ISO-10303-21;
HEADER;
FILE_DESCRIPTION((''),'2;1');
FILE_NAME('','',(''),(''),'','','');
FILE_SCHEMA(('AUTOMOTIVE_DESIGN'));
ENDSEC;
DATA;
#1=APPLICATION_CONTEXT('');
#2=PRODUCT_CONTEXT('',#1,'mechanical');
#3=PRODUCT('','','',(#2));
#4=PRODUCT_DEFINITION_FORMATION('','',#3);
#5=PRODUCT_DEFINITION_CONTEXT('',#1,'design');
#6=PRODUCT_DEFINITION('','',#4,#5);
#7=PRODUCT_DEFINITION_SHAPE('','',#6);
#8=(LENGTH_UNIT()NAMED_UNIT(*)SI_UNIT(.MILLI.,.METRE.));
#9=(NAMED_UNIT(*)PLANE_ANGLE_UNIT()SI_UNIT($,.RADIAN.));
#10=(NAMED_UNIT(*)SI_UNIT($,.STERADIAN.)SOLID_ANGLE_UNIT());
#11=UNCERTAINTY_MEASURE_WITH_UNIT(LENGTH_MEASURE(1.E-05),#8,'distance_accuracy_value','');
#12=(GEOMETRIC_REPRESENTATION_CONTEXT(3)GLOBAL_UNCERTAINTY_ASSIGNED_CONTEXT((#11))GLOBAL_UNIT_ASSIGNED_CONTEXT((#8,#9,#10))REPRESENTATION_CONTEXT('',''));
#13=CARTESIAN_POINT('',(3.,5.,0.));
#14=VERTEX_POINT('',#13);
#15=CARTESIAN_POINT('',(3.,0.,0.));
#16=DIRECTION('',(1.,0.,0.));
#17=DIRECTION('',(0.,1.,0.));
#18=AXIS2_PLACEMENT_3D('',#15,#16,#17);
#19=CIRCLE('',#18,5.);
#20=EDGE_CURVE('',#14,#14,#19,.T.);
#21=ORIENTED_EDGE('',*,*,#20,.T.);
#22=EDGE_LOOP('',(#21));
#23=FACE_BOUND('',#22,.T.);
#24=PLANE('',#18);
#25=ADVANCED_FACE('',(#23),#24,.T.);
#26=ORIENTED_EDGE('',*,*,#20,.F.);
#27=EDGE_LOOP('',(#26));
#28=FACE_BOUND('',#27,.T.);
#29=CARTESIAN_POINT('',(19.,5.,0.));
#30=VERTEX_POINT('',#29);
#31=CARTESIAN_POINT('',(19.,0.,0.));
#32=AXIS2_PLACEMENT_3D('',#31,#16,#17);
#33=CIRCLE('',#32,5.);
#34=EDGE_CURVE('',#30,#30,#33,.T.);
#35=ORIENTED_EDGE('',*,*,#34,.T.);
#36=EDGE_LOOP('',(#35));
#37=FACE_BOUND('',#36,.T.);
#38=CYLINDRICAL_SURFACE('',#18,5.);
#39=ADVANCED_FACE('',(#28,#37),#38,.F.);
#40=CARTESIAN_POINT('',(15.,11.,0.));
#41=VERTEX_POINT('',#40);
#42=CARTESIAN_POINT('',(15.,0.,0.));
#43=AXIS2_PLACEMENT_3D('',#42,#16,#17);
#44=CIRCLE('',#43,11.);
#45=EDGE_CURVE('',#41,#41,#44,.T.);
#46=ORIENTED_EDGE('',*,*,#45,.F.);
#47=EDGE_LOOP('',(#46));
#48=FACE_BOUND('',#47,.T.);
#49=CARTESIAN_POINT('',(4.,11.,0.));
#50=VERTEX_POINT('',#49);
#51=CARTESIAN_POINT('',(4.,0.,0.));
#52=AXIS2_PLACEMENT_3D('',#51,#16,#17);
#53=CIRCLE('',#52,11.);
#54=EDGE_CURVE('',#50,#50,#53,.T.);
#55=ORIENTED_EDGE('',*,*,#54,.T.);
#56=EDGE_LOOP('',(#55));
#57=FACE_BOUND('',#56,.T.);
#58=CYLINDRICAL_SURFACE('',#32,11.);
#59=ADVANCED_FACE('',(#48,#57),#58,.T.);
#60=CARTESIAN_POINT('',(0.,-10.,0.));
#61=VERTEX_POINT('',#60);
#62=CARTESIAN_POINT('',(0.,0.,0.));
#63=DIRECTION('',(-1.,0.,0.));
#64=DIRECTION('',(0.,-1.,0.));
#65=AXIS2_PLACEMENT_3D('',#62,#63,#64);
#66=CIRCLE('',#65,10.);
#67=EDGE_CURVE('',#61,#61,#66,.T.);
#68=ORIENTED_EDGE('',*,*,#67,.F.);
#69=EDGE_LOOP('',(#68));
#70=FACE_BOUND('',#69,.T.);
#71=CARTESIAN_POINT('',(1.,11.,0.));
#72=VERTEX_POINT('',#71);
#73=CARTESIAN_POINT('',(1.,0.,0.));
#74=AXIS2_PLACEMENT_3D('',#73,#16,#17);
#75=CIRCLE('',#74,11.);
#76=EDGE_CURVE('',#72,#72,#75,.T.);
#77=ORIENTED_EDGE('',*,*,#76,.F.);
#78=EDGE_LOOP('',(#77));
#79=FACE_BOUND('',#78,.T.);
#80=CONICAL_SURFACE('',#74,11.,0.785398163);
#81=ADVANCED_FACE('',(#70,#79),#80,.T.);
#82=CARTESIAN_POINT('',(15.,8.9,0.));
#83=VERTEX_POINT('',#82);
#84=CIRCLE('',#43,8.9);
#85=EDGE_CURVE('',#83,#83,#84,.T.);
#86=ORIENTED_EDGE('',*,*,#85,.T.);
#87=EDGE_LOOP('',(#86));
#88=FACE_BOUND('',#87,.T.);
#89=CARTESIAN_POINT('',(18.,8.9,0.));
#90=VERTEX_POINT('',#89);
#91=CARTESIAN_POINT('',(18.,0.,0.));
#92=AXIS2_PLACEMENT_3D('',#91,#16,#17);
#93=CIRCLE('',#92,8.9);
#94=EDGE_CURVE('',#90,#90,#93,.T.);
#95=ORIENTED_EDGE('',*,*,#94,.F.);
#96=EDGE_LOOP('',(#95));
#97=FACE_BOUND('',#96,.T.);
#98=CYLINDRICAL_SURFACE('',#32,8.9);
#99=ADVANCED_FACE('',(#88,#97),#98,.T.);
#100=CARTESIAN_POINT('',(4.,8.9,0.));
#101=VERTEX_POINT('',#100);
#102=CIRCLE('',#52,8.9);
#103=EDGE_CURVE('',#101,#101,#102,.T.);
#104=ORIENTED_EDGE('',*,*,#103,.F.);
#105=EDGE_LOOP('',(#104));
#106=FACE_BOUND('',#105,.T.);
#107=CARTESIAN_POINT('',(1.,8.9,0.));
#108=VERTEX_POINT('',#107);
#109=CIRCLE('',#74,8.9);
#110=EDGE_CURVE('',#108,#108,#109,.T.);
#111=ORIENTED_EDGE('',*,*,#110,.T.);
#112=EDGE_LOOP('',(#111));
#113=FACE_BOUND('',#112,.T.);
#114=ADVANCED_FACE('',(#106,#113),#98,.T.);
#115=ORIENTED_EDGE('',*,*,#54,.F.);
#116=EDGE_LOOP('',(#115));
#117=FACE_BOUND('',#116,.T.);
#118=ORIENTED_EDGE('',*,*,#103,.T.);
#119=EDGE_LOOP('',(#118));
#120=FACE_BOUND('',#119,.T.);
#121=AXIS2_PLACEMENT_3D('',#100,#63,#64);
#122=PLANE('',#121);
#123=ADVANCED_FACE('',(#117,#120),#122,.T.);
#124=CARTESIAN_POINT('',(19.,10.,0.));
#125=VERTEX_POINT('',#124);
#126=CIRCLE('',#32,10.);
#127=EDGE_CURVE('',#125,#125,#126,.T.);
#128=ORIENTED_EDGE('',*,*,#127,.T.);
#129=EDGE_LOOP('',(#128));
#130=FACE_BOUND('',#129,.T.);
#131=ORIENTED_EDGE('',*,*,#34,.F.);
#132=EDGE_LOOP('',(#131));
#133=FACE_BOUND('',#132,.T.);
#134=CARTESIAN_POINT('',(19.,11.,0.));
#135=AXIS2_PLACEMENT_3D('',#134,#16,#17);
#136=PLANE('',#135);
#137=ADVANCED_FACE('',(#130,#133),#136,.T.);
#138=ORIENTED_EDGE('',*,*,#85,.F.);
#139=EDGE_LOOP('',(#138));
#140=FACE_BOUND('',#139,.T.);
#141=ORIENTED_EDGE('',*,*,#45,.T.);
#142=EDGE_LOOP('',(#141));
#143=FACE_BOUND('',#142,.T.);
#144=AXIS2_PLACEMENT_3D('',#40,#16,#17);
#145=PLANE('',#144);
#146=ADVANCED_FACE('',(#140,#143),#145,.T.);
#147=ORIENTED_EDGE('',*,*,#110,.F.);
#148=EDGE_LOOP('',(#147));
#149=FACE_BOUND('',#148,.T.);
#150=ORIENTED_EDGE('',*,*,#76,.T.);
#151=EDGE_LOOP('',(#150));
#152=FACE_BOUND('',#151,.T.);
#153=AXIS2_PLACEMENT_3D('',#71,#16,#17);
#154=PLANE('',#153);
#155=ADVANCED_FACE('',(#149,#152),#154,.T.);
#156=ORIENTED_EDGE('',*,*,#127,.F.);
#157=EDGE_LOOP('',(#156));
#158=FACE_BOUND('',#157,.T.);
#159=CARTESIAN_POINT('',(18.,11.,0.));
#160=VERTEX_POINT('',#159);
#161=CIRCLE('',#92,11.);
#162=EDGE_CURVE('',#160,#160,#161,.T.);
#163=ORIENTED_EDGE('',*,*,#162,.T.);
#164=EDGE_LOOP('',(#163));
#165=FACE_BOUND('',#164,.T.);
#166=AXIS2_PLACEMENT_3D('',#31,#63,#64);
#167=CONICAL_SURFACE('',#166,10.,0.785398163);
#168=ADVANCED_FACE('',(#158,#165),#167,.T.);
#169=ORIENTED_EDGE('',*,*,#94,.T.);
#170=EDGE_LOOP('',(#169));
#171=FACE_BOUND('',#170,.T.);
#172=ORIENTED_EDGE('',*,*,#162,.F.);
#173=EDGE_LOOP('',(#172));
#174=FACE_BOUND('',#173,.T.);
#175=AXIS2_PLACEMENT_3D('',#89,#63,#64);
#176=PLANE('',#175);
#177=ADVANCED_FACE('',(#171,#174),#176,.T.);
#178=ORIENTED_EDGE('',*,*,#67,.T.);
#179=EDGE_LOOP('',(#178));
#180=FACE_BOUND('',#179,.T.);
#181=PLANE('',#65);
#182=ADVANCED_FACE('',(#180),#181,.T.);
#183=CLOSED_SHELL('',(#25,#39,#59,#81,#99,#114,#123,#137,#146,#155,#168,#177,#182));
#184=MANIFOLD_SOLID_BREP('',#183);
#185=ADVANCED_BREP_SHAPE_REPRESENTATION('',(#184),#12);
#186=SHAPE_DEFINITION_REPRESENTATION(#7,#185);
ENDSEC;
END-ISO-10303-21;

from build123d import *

# Parameters (mm, degrees)
SCHIZZO2_R               = 5
TAGLIO_ESTRUSIONE1_DEPTH = 16
SMUSSO1_SIZE             = 1


with BuildPart() as part:
    # Schizzo1 → Rivoluzione1 (revolve)
    with BuildSketch(Plane.XY):
        Polygon((0, 0), (0, 11), (1, 11), (1, 8.9), (4, 8.9), (4, 11), (15, 11), (15, 8.9), (18, 8.9), (18, 11), (19, 11), (19, 0), align=None)
    revolve(axis=Axis((19, 0, 0), (-1, 0, 0)))

    # Schizzo2 → Taglio-Estrusione1 (cut)
    with BuildSketch(Plane(origin=(19, 0, 0), x_dir=(0, 0, -1), z_dir=(1, 0, 0))):
        with Locations(Location((0, 0, 0), (0, 0, 90))):
            Circle(SCHIZZO2_R)
    extrude(amount=-TAGLIO_ESTRUSIONE1_DEPTH, mode=Mode.SUBTRACT)

    # Smusso1
    smusso1_edges = [part.edges().sort_by_distance(p)[0] for p in [
        (0, -11, 0),
        (19, -11, 0),
    ]]
    chamfer(smusso1_edges, length=SMUSSO1_SIZE - 0.0001)  # a hair under: the kernel refuses the full size


solid = part.part
